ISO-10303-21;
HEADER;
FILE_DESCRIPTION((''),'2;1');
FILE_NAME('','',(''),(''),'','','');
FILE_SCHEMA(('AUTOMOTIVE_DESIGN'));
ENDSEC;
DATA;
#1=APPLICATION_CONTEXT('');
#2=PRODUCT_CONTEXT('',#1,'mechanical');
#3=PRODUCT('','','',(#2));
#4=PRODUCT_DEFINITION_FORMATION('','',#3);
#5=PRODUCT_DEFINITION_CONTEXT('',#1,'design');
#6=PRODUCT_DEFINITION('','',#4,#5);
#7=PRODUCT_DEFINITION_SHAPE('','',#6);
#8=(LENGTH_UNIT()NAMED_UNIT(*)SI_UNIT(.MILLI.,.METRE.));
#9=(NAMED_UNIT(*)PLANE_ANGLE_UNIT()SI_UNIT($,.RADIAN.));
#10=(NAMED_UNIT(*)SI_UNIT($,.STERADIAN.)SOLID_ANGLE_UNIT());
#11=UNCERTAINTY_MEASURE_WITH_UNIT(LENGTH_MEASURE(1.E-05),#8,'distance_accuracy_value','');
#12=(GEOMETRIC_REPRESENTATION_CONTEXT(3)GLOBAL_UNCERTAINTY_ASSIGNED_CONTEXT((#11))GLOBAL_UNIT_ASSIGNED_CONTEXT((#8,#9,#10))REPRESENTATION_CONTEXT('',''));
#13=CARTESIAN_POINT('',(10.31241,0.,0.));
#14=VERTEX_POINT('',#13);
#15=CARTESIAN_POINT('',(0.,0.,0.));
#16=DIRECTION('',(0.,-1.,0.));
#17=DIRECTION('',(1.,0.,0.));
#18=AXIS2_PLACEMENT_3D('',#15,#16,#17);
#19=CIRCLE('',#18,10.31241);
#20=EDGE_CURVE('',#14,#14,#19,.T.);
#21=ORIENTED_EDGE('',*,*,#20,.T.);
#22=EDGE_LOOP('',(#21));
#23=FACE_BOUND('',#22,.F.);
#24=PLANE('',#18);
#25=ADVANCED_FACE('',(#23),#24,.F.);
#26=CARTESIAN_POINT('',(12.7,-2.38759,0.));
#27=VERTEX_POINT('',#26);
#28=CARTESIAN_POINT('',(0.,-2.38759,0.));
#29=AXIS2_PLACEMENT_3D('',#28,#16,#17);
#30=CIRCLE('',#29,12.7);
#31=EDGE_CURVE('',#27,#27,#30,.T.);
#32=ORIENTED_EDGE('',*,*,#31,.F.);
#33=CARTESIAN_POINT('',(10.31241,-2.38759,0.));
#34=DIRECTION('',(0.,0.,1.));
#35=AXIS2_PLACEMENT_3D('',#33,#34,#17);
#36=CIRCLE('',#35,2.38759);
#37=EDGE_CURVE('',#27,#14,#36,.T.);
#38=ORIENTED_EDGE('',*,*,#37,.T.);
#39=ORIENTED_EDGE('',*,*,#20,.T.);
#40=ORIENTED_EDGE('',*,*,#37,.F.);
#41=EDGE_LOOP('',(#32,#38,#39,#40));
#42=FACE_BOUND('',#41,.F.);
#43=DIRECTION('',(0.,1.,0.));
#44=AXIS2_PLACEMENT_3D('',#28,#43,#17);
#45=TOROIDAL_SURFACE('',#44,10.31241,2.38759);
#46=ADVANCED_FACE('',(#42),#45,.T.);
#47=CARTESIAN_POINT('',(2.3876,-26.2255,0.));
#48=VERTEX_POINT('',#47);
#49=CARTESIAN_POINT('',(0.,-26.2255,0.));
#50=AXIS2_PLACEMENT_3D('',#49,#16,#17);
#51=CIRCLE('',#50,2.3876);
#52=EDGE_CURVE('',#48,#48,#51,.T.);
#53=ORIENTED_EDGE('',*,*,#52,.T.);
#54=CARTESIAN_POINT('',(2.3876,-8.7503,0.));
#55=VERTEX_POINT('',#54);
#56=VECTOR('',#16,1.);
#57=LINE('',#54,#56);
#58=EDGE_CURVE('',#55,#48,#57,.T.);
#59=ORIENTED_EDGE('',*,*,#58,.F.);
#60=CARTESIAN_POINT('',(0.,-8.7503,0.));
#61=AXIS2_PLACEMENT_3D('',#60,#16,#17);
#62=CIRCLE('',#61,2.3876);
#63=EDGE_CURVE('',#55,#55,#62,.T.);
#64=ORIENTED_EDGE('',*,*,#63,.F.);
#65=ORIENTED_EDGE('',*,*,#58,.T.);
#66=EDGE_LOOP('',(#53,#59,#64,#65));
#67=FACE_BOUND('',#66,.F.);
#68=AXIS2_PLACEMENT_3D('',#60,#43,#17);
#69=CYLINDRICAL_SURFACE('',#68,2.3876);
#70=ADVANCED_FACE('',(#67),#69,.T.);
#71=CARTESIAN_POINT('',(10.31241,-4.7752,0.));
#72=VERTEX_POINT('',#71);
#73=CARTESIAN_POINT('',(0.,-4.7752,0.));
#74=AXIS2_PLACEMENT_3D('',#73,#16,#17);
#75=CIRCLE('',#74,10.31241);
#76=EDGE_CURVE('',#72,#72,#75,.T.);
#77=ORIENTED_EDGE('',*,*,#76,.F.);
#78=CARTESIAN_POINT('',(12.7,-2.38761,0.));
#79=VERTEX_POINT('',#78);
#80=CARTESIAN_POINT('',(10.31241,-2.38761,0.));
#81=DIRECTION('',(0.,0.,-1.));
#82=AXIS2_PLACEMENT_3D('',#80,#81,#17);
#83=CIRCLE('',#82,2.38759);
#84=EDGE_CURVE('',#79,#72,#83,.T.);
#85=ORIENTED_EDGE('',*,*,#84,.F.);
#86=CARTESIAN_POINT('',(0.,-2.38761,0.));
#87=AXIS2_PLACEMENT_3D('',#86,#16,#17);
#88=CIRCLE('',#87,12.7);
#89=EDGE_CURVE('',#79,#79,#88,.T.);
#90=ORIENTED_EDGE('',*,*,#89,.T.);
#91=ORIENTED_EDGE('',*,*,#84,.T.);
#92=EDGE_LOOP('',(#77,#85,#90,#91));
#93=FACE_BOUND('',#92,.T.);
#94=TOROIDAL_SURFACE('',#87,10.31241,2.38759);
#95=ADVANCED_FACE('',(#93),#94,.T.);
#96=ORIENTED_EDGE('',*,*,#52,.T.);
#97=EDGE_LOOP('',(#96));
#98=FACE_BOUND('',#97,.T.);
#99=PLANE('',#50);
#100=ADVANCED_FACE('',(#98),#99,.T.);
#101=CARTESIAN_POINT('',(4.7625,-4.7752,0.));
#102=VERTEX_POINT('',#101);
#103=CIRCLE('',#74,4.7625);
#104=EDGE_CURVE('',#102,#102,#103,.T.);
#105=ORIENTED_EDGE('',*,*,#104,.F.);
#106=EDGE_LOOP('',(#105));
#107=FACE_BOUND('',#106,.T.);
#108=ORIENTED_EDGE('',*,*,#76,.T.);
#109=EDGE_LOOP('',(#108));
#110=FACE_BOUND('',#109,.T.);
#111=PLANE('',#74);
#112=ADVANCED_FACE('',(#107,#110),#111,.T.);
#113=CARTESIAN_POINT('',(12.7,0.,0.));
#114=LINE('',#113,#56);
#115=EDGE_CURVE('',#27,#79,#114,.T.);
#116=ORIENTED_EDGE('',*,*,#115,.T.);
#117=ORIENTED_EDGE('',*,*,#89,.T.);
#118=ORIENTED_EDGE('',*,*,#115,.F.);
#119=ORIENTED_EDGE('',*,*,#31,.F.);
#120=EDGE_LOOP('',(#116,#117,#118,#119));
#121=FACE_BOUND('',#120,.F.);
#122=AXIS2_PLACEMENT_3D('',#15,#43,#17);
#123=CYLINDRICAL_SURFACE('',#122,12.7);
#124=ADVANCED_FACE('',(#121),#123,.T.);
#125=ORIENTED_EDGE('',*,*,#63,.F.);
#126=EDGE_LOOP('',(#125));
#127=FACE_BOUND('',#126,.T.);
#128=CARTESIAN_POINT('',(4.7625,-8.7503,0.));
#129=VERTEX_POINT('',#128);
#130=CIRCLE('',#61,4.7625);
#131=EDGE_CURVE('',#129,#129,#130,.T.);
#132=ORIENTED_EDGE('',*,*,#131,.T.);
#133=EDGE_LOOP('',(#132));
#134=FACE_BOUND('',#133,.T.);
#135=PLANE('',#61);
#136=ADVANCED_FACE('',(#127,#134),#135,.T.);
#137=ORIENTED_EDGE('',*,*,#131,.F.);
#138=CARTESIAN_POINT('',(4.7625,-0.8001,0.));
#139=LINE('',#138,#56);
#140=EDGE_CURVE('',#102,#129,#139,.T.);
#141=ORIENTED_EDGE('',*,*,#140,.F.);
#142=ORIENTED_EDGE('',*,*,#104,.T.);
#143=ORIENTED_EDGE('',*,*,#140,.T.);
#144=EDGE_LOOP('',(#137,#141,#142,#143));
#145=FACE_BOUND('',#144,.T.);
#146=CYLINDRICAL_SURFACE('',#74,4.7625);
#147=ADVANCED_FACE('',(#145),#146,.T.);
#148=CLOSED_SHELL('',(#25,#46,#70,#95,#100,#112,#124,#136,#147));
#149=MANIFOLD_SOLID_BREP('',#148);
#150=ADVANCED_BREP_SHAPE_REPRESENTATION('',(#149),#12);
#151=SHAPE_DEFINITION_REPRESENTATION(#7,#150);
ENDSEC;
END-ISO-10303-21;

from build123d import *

# Parameters (mm, degrees)
F0_R     = 12.7
F1_DEPTH = 4.7752
F2_R     = 2.38759
F3_R     = 4.7625
F4_DEPTH = 3.9751
F5_R     = 2.3876
F6_DEPTH = 17.4752


# Not quite as in the source:
# - a fillet or chamfer is up to 0.001 mm smaller than in the source, because OpenCascade refuses the exact size


with BuildPart() as f1:
    # F0 (on Front) → F1 (new body)
    with BuildSketch(Plane.XZ):
        Circle(F0_R)
    extrude(amount=F1_DEPTH)

    # F2 (radius 2.3876 in the source; OpenCascade refuses exactly that, so slightly less here)
    f2_edges = [f1.edges().sort_by_distance(p)[0] for p in [
        (-12.7, 0, 0),
        (-12.7, -4.7752, 0),
    ]]
    fillet(f2_edges, radius=F2_R)

    # F3 (on face) → F4 (join, symmetric)
    with BuildSketch(Plane.XZ.offset(4.7752)):
        Circle(F3_R)
    extrude(amount=F4_DEPTH, both=True)

    # F5 (on face) → F6 (join)
    with BuildSketch(Plane.XZ.offset(8.7503)):
        Circle(F5_R)
    extrude(amount=F6_DEPTH)


solid = f1.part
